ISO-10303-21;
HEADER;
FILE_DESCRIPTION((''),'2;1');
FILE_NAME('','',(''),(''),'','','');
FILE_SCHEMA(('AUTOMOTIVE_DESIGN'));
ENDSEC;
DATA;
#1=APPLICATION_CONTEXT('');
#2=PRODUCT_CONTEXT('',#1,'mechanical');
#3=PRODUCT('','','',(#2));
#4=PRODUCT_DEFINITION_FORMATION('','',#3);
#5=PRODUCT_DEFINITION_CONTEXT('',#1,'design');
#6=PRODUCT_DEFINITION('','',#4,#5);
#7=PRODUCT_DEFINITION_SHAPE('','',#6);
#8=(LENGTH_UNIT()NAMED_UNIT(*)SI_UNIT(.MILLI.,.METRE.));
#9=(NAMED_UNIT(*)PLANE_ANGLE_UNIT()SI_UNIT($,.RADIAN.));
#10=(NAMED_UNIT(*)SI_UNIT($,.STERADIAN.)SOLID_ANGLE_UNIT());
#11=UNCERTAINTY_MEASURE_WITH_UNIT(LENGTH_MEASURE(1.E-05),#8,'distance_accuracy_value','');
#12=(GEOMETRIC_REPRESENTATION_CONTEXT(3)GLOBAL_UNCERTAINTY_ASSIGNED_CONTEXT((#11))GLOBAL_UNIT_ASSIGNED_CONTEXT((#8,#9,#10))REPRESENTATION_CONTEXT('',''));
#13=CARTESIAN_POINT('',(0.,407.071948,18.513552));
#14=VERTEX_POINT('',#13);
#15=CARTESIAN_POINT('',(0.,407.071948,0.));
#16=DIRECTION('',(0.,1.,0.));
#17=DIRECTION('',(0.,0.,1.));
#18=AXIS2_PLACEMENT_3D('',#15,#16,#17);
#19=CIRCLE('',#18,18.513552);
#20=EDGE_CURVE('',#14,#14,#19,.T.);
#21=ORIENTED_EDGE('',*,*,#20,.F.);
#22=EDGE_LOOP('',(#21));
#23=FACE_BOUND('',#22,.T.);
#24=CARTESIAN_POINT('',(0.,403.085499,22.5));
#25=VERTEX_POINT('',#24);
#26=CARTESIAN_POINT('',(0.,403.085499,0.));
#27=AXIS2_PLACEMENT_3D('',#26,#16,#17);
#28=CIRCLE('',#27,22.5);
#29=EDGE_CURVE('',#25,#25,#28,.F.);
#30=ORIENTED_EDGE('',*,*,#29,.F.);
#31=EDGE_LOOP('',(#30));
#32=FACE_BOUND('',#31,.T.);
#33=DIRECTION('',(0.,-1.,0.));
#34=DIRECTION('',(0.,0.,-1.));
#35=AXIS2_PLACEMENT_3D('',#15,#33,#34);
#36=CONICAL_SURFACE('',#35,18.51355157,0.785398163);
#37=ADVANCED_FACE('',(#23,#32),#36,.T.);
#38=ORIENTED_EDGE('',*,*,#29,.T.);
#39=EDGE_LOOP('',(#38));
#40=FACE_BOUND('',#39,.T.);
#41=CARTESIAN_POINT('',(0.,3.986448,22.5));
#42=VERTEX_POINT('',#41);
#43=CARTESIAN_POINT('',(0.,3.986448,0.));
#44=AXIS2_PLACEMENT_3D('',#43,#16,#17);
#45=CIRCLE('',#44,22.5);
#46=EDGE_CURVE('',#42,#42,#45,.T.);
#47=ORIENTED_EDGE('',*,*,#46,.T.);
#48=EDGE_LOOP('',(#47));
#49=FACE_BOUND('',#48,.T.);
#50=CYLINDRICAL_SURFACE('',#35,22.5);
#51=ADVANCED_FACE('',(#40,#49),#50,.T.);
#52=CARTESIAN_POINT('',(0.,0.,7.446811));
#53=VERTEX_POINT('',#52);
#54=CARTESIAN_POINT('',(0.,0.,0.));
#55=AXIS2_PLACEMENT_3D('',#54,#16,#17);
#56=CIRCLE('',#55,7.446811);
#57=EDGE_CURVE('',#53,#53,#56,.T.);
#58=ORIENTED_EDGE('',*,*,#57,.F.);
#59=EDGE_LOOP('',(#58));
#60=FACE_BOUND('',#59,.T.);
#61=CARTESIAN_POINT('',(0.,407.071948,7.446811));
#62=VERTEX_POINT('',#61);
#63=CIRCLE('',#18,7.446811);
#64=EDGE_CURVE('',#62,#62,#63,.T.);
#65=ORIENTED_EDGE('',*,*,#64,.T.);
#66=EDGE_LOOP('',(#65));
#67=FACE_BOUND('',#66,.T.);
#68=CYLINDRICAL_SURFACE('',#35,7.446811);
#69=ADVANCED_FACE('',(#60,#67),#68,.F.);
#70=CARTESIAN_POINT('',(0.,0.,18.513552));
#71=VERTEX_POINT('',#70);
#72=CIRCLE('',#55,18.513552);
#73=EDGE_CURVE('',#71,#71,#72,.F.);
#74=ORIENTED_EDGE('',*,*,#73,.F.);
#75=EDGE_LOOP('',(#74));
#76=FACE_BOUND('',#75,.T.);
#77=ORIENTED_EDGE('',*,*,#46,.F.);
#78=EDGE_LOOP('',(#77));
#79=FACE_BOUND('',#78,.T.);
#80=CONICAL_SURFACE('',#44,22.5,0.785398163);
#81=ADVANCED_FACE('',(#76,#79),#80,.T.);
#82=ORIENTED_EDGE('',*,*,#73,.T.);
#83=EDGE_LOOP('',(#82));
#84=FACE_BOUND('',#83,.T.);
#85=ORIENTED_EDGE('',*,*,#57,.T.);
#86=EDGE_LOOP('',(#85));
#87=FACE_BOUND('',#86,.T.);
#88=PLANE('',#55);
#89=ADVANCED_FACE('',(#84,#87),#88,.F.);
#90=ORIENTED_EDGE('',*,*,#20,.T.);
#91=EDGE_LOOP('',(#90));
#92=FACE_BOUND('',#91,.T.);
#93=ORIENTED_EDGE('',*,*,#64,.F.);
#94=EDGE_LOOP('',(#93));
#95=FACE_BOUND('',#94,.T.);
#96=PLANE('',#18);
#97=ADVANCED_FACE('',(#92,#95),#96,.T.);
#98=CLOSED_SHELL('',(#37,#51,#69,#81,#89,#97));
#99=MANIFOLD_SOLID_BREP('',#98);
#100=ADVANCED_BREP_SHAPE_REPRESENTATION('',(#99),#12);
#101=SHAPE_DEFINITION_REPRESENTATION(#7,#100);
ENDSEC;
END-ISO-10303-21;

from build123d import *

# Parameters (mm, degrees)
SKETCH1_R           = 22.5
BOSS_EXTRUDE1_DEPTH = 407.071947922
SKETCH2_R           = 7.446811254
CUT_EXTRUDE1_DEPTH  = 409.313691645
CHAMFER1_SIZE       = 3.98644843


with BuildPart() as part:
    # Sketch1 → Boss-Extrude1 (new body)
    with BuildSketch(Plane(origin=(0, 0, 0), x_dir=(1, 0, 0), z_dir=(0, 1, 0))):
        Circle(SKETCH1_R)
    extrude(amount=BOSS_EXTRUDE1_DEPTH)

    # Sketch2 → Cut-Extrude1 (cut, through all)
    with BuildSketch(Plane(origin=(0, 0, 0), x_dir=(1, 0, 0), z_dir=(0, 1, 0))):
        Circle(SKETCH2_R)
    extrude(amount=CUT_EXTRUDE1_DEPTH, mode=Mode.SUBTRACT)

    # Chamfer1
    chamfer1_edges = [part.edges().sort_by_distance(p)[0] for p in [
        (-22.5, 407.071947922, 0),
        (-22.5, 0, 0),
    ]]
    chamfer(chamfer1_edges, length=CHAMFER1_SIZE)


solid = part.part
